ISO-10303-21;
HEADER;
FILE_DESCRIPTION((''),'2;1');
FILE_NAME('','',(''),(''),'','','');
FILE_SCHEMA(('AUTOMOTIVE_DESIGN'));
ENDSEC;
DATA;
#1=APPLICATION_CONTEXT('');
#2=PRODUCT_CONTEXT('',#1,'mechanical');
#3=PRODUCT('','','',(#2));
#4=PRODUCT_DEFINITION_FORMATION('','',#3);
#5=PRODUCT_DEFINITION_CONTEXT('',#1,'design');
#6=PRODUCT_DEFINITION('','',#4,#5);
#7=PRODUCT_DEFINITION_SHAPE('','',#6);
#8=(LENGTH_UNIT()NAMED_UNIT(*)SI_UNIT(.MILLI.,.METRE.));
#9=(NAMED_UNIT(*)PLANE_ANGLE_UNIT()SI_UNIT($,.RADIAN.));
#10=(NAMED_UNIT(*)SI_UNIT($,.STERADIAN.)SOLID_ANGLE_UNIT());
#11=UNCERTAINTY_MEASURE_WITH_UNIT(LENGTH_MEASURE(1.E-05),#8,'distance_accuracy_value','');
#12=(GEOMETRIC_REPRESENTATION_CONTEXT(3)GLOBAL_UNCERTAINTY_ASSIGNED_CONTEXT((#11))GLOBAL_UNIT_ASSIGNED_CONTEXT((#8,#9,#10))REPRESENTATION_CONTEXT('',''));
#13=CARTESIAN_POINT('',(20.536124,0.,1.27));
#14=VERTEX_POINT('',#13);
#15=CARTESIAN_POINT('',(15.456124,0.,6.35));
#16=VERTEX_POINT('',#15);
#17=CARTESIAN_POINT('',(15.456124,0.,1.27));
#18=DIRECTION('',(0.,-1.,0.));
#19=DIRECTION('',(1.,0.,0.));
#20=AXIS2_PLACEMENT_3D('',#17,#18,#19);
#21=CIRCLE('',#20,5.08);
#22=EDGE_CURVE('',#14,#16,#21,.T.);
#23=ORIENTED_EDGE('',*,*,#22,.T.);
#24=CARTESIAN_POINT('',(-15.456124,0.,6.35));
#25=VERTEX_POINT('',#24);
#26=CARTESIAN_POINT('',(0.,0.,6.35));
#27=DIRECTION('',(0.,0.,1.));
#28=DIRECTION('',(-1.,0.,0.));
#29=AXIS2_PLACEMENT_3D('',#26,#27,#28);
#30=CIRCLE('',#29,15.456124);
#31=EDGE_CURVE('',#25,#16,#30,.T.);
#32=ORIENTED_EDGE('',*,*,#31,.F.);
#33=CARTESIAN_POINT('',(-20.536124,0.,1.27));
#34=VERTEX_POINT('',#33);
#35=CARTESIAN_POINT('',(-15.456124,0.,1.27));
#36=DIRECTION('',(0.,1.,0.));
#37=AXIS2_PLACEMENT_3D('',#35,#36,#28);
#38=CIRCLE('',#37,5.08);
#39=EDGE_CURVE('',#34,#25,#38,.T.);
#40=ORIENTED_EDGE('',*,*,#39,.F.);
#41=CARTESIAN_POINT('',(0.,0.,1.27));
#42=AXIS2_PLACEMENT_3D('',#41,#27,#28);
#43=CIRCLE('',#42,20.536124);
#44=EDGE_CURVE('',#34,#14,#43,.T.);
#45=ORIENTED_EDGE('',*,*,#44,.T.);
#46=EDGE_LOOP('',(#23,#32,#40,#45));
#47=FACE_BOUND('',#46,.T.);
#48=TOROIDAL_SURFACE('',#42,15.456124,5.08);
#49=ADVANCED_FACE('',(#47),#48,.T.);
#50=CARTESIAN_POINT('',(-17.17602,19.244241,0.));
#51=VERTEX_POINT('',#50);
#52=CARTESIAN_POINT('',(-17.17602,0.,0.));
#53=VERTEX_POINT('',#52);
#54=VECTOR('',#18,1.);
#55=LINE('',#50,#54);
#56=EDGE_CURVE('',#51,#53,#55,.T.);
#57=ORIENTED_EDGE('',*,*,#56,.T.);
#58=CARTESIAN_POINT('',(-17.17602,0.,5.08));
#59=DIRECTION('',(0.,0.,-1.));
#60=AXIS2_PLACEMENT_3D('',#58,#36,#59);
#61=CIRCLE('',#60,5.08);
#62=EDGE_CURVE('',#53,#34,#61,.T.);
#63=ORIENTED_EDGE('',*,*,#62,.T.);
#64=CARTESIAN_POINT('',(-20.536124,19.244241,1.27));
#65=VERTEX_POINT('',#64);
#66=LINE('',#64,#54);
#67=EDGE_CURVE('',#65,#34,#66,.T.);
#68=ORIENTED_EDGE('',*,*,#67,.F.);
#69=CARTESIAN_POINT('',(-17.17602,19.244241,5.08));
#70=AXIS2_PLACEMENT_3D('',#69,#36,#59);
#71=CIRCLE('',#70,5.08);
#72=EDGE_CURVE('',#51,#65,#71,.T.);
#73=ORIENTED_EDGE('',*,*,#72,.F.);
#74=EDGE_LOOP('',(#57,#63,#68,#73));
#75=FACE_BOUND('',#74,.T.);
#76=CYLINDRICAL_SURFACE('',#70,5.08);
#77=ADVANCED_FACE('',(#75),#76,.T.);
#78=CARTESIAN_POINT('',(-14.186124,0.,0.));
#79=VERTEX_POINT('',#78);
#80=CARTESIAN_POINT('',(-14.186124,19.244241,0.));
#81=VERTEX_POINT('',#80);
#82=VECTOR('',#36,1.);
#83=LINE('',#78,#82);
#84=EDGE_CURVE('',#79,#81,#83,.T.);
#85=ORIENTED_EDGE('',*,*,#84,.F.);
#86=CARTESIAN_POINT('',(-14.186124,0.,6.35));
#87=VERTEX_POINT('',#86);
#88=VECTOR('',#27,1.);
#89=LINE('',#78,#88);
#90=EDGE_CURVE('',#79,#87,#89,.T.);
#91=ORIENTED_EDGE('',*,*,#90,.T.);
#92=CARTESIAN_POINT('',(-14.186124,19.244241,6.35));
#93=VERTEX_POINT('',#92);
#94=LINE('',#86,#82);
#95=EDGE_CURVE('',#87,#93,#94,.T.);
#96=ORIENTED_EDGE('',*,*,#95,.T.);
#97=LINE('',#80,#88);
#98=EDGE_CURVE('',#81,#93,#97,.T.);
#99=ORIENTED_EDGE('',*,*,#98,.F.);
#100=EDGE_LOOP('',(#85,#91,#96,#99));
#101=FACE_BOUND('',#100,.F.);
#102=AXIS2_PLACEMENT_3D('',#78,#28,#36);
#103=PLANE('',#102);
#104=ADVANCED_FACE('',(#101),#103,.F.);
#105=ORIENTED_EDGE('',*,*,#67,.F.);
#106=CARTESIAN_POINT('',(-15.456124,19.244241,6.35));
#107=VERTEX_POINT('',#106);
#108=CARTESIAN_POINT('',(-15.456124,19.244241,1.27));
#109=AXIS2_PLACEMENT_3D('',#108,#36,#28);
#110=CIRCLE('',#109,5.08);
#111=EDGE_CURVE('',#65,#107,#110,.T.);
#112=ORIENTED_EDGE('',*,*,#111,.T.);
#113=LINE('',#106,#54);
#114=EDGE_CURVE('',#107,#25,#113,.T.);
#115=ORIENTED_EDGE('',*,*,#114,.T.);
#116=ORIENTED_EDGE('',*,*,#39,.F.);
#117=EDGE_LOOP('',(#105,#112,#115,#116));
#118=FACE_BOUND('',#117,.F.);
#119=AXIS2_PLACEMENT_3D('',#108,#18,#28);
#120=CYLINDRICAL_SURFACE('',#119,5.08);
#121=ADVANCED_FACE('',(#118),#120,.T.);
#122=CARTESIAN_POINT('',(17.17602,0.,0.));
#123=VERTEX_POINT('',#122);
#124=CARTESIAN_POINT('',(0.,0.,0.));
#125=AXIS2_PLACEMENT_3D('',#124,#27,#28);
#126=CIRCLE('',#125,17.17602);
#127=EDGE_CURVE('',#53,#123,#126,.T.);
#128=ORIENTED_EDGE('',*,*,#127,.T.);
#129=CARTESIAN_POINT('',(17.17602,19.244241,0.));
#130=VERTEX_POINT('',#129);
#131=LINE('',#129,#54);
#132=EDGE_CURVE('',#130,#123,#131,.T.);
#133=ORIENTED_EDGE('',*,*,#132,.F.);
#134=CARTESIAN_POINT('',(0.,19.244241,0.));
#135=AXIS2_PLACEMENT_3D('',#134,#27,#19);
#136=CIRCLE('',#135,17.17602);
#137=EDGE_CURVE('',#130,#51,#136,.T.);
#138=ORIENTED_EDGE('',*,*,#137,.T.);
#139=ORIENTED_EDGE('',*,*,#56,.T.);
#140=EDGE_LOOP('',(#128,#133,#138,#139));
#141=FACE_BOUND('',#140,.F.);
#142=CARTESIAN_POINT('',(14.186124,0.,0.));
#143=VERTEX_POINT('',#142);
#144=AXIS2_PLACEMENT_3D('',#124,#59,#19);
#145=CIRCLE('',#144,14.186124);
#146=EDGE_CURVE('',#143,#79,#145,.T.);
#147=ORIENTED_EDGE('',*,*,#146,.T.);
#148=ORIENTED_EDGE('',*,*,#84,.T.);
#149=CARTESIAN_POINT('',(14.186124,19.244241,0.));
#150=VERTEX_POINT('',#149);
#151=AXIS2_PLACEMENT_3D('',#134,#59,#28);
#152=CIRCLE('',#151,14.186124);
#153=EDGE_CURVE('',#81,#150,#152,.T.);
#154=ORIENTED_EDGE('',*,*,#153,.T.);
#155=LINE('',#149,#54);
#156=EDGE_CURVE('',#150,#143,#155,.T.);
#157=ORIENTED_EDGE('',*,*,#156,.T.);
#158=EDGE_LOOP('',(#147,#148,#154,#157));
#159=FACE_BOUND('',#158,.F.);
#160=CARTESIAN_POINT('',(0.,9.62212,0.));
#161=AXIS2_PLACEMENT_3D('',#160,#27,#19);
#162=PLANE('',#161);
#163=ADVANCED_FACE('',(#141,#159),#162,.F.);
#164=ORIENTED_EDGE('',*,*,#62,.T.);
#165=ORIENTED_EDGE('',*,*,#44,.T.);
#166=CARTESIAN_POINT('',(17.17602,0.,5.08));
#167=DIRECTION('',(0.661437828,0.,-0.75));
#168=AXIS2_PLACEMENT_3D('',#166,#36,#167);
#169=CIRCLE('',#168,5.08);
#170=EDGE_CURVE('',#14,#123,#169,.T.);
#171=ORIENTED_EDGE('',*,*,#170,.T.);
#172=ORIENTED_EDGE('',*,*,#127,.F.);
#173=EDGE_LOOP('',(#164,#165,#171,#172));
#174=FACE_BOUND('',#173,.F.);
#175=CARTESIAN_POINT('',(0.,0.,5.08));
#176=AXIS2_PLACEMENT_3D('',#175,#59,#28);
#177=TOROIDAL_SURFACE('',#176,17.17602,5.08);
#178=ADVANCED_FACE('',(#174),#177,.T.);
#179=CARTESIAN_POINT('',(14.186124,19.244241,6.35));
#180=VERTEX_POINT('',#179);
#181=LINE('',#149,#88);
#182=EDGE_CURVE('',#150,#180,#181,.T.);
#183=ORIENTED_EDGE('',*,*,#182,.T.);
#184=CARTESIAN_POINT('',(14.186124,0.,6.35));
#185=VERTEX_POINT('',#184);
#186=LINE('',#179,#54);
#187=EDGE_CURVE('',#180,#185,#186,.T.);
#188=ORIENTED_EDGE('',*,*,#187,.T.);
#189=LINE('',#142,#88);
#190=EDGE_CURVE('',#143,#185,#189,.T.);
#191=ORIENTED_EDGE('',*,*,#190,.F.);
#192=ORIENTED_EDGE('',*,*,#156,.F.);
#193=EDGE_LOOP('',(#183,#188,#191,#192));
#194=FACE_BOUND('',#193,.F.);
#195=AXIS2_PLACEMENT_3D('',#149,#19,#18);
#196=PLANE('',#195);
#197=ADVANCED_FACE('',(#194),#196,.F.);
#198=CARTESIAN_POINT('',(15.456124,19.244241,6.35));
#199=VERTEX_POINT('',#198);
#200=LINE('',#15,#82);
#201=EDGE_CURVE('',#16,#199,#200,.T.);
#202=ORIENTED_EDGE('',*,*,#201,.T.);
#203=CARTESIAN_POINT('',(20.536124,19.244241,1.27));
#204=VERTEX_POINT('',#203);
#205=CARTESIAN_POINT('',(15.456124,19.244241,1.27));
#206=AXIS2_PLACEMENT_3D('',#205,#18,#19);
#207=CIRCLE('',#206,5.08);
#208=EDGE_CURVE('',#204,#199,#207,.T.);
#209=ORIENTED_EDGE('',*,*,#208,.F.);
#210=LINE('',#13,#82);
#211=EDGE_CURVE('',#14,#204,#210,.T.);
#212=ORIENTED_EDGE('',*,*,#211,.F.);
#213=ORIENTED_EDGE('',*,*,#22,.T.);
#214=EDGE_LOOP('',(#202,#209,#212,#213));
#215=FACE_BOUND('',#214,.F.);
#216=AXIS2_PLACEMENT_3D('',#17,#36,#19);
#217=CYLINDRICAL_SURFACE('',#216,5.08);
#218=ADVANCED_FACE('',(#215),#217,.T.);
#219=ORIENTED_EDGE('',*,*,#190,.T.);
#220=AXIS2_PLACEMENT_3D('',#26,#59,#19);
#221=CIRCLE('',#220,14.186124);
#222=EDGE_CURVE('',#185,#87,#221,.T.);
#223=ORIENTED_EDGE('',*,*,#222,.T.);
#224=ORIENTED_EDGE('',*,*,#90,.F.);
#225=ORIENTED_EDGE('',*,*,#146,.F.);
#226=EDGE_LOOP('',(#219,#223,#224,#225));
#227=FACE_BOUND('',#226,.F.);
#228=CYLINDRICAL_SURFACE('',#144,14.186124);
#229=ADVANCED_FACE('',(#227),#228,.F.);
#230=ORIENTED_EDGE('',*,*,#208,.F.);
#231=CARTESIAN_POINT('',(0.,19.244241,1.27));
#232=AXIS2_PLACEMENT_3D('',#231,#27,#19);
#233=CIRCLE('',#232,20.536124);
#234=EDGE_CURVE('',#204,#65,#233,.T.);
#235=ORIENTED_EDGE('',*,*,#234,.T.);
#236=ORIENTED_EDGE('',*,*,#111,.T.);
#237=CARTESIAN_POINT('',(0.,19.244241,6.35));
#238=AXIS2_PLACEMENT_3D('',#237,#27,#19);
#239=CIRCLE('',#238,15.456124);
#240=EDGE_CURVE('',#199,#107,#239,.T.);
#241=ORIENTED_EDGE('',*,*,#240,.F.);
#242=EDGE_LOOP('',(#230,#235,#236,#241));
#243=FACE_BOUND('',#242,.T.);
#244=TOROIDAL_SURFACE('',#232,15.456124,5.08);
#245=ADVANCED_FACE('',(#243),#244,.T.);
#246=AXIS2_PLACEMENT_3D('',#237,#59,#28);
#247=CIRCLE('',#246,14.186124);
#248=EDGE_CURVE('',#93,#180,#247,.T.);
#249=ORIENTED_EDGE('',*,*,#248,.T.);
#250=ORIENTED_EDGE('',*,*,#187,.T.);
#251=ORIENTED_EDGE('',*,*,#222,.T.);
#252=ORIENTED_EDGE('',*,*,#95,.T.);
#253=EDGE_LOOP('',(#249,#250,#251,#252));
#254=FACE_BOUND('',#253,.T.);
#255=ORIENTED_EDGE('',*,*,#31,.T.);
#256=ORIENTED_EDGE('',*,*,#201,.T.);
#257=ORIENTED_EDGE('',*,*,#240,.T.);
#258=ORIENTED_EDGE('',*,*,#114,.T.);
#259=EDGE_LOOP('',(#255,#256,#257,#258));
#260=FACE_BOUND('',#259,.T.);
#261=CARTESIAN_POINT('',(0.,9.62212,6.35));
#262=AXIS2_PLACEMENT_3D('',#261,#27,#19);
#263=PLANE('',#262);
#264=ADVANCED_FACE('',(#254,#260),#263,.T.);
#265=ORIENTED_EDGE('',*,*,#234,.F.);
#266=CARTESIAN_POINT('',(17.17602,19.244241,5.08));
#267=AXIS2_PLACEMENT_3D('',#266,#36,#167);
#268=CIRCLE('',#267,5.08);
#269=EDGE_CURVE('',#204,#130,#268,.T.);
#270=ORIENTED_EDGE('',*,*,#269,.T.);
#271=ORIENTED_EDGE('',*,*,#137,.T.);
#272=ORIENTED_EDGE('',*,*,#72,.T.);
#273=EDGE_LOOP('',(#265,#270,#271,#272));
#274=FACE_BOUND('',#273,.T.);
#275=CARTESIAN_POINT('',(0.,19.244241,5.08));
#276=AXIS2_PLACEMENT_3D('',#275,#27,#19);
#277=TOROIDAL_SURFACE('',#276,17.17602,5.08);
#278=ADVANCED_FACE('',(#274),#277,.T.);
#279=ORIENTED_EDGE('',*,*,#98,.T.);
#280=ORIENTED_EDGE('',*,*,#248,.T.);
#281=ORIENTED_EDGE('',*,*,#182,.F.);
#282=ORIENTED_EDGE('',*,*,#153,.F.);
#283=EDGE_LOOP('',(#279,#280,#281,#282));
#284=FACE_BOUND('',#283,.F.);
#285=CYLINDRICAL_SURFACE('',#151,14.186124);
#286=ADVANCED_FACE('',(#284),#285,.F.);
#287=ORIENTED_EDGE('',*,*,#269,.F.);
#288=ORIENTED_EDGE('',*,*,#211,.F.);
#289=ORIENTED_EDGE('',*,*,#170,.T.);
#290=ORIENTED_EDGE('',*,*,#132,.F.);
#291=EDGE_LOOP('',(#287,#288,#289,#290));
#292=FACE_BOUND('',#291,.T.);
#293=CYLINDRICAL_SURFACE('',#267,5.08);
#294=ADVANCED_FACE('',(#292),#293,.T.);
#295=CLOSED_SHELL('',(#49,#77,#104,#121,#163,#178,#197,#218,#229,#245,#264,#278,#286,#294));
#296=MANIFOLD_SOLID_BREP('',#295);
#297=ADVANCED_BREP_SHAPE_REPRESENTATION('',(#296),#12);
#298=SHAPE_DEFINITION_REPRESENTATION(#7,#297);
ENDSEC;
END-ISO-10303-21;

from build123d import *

# Parameters (mm, degrees)
F1_DEPTH    = 6.35
F2_R        = 5.08
F3_T1_DEPTH = 19.2442405969
F3_T4_ANGLE = 180
F3_T6_ANGLE = 180


# Not quite as in the source:
# - a fillet or chamfer that OpenCascade refuses, or shapes differently, is made with other operations: its cross-section is extruded or revolved along the edge and cut away or added


with BuildPart() as f1:
    # F0 (on Top) → F1 (new body)
    with BuildSketch(Plane.XY):
        with BuildLine():
            Line((20.5361241051, 0), (20.5361241051, 19.2442405969))
            ThreePointArc((20.5361241051, 19.2442405969), (0, 39.780364702), (-20.5361241051, 19.2442405969))
            Line((-20.5361241051, 19.2442405969), (-20.5361241051, 0))
            ThreePointArc((-20.5361241051, 0), (0, -20.5361241051), (20.5361241051, 0))
        make_face()
        with BuildLine():
            ThreePointArc((14.1861241051, 0), (0, -14.1861241051), (-14.1861241051, 0))
            Line((-14.1861241051, 0), (-14.1861241051, 19.2442405969))
            ThreePointArc((-14.1861241051, 19.2442405969), (0, 33.430364702), (14.1861241051, 19.2442405969))
            Line((14.1861241051, 19.2442405969), (14.1861241051, 0))
        make_face(mode=Mode.SUBTRACT)
    extrude(amount=F1_DEPTH)

    # F2
    f2_edges = [f1.edges().sort_by_distance(p)[0] for p in [
        (0, 39.780365, 6.35),
    ]]
    fillet(f2_edges, radius=F2_R)

    # F3: fillet of radius 5.08 on 1 edges, made by hand

    # F3_s2 → F3_t1 (cut)
    with BuildSketch(Plane.XZ.offset(-19.2442405969)):
        with BuildLine():
            ThreePointArc((20.5361241051, 1.27), (18.9720711643, 0.3280951188), (17.1760199401, 0))
            Line((17.1760199401, 0), (20.5361241051, 0))
            Line((20.5361241051, 0), (20.5361241051, 1.27))
        make_face()
        with BuildLine():
            ThreePointArc((-17.1760199401, 0), (-18.9720711643, 0.3280951188), (-20.5361241051, 1.27))
            Line((-20.5361241051, 1.27), (-20.5361241051, 0))
            Line((-20.5361241051, 0), (-17.1760199401, 0))
        make_face()
    extrude(amount=F3_T1_DEPTH, mode=Mode.SUBTRACT)

    # F3_s3 → F3_t4 (revolve, cut)
    with BuildSketch(Plane.XZ.offset(-19.2442405969)):
        with BuildLine():
            ThreePointArc((17.1760199401, 0), (18.9720711643, 0.3280951188), (20.5361241051, 1.27))
            Line((20.5361241051, 1.27), (20.5361241051, 0))
            Line((20.5361241051, 0), (17.1760199401, 0))
        make_face()
    revolve(axis=Axis((0, 19.2442405969, 0), (0, 0, 1)), revolution_arc=F3_T4_ANGLE, mode=Mode.SUBTRACT)

    # F3_s5 → F3_t6 (revolve, cut)
    with BuildSketch(Plane.XZ):
        with BuildLine():
            ThreePointArc((-20.5361241051, 1.27), (-18.9720711643, 0.3280951188), (-17.1760199401, 0))
            Line((-17.1760199401, 0), (-20.5361241051, 0))
            Line((-20.5361241051, 0), (-20.5361241051, 1.27))
        make_face()
    revolve(axis=Axis((0, 0, 0), (0, 0, 1)), revolution_arc=F3_T6_ANGLE, mode=Mode.SUBTRACT)


solid = f1.part
